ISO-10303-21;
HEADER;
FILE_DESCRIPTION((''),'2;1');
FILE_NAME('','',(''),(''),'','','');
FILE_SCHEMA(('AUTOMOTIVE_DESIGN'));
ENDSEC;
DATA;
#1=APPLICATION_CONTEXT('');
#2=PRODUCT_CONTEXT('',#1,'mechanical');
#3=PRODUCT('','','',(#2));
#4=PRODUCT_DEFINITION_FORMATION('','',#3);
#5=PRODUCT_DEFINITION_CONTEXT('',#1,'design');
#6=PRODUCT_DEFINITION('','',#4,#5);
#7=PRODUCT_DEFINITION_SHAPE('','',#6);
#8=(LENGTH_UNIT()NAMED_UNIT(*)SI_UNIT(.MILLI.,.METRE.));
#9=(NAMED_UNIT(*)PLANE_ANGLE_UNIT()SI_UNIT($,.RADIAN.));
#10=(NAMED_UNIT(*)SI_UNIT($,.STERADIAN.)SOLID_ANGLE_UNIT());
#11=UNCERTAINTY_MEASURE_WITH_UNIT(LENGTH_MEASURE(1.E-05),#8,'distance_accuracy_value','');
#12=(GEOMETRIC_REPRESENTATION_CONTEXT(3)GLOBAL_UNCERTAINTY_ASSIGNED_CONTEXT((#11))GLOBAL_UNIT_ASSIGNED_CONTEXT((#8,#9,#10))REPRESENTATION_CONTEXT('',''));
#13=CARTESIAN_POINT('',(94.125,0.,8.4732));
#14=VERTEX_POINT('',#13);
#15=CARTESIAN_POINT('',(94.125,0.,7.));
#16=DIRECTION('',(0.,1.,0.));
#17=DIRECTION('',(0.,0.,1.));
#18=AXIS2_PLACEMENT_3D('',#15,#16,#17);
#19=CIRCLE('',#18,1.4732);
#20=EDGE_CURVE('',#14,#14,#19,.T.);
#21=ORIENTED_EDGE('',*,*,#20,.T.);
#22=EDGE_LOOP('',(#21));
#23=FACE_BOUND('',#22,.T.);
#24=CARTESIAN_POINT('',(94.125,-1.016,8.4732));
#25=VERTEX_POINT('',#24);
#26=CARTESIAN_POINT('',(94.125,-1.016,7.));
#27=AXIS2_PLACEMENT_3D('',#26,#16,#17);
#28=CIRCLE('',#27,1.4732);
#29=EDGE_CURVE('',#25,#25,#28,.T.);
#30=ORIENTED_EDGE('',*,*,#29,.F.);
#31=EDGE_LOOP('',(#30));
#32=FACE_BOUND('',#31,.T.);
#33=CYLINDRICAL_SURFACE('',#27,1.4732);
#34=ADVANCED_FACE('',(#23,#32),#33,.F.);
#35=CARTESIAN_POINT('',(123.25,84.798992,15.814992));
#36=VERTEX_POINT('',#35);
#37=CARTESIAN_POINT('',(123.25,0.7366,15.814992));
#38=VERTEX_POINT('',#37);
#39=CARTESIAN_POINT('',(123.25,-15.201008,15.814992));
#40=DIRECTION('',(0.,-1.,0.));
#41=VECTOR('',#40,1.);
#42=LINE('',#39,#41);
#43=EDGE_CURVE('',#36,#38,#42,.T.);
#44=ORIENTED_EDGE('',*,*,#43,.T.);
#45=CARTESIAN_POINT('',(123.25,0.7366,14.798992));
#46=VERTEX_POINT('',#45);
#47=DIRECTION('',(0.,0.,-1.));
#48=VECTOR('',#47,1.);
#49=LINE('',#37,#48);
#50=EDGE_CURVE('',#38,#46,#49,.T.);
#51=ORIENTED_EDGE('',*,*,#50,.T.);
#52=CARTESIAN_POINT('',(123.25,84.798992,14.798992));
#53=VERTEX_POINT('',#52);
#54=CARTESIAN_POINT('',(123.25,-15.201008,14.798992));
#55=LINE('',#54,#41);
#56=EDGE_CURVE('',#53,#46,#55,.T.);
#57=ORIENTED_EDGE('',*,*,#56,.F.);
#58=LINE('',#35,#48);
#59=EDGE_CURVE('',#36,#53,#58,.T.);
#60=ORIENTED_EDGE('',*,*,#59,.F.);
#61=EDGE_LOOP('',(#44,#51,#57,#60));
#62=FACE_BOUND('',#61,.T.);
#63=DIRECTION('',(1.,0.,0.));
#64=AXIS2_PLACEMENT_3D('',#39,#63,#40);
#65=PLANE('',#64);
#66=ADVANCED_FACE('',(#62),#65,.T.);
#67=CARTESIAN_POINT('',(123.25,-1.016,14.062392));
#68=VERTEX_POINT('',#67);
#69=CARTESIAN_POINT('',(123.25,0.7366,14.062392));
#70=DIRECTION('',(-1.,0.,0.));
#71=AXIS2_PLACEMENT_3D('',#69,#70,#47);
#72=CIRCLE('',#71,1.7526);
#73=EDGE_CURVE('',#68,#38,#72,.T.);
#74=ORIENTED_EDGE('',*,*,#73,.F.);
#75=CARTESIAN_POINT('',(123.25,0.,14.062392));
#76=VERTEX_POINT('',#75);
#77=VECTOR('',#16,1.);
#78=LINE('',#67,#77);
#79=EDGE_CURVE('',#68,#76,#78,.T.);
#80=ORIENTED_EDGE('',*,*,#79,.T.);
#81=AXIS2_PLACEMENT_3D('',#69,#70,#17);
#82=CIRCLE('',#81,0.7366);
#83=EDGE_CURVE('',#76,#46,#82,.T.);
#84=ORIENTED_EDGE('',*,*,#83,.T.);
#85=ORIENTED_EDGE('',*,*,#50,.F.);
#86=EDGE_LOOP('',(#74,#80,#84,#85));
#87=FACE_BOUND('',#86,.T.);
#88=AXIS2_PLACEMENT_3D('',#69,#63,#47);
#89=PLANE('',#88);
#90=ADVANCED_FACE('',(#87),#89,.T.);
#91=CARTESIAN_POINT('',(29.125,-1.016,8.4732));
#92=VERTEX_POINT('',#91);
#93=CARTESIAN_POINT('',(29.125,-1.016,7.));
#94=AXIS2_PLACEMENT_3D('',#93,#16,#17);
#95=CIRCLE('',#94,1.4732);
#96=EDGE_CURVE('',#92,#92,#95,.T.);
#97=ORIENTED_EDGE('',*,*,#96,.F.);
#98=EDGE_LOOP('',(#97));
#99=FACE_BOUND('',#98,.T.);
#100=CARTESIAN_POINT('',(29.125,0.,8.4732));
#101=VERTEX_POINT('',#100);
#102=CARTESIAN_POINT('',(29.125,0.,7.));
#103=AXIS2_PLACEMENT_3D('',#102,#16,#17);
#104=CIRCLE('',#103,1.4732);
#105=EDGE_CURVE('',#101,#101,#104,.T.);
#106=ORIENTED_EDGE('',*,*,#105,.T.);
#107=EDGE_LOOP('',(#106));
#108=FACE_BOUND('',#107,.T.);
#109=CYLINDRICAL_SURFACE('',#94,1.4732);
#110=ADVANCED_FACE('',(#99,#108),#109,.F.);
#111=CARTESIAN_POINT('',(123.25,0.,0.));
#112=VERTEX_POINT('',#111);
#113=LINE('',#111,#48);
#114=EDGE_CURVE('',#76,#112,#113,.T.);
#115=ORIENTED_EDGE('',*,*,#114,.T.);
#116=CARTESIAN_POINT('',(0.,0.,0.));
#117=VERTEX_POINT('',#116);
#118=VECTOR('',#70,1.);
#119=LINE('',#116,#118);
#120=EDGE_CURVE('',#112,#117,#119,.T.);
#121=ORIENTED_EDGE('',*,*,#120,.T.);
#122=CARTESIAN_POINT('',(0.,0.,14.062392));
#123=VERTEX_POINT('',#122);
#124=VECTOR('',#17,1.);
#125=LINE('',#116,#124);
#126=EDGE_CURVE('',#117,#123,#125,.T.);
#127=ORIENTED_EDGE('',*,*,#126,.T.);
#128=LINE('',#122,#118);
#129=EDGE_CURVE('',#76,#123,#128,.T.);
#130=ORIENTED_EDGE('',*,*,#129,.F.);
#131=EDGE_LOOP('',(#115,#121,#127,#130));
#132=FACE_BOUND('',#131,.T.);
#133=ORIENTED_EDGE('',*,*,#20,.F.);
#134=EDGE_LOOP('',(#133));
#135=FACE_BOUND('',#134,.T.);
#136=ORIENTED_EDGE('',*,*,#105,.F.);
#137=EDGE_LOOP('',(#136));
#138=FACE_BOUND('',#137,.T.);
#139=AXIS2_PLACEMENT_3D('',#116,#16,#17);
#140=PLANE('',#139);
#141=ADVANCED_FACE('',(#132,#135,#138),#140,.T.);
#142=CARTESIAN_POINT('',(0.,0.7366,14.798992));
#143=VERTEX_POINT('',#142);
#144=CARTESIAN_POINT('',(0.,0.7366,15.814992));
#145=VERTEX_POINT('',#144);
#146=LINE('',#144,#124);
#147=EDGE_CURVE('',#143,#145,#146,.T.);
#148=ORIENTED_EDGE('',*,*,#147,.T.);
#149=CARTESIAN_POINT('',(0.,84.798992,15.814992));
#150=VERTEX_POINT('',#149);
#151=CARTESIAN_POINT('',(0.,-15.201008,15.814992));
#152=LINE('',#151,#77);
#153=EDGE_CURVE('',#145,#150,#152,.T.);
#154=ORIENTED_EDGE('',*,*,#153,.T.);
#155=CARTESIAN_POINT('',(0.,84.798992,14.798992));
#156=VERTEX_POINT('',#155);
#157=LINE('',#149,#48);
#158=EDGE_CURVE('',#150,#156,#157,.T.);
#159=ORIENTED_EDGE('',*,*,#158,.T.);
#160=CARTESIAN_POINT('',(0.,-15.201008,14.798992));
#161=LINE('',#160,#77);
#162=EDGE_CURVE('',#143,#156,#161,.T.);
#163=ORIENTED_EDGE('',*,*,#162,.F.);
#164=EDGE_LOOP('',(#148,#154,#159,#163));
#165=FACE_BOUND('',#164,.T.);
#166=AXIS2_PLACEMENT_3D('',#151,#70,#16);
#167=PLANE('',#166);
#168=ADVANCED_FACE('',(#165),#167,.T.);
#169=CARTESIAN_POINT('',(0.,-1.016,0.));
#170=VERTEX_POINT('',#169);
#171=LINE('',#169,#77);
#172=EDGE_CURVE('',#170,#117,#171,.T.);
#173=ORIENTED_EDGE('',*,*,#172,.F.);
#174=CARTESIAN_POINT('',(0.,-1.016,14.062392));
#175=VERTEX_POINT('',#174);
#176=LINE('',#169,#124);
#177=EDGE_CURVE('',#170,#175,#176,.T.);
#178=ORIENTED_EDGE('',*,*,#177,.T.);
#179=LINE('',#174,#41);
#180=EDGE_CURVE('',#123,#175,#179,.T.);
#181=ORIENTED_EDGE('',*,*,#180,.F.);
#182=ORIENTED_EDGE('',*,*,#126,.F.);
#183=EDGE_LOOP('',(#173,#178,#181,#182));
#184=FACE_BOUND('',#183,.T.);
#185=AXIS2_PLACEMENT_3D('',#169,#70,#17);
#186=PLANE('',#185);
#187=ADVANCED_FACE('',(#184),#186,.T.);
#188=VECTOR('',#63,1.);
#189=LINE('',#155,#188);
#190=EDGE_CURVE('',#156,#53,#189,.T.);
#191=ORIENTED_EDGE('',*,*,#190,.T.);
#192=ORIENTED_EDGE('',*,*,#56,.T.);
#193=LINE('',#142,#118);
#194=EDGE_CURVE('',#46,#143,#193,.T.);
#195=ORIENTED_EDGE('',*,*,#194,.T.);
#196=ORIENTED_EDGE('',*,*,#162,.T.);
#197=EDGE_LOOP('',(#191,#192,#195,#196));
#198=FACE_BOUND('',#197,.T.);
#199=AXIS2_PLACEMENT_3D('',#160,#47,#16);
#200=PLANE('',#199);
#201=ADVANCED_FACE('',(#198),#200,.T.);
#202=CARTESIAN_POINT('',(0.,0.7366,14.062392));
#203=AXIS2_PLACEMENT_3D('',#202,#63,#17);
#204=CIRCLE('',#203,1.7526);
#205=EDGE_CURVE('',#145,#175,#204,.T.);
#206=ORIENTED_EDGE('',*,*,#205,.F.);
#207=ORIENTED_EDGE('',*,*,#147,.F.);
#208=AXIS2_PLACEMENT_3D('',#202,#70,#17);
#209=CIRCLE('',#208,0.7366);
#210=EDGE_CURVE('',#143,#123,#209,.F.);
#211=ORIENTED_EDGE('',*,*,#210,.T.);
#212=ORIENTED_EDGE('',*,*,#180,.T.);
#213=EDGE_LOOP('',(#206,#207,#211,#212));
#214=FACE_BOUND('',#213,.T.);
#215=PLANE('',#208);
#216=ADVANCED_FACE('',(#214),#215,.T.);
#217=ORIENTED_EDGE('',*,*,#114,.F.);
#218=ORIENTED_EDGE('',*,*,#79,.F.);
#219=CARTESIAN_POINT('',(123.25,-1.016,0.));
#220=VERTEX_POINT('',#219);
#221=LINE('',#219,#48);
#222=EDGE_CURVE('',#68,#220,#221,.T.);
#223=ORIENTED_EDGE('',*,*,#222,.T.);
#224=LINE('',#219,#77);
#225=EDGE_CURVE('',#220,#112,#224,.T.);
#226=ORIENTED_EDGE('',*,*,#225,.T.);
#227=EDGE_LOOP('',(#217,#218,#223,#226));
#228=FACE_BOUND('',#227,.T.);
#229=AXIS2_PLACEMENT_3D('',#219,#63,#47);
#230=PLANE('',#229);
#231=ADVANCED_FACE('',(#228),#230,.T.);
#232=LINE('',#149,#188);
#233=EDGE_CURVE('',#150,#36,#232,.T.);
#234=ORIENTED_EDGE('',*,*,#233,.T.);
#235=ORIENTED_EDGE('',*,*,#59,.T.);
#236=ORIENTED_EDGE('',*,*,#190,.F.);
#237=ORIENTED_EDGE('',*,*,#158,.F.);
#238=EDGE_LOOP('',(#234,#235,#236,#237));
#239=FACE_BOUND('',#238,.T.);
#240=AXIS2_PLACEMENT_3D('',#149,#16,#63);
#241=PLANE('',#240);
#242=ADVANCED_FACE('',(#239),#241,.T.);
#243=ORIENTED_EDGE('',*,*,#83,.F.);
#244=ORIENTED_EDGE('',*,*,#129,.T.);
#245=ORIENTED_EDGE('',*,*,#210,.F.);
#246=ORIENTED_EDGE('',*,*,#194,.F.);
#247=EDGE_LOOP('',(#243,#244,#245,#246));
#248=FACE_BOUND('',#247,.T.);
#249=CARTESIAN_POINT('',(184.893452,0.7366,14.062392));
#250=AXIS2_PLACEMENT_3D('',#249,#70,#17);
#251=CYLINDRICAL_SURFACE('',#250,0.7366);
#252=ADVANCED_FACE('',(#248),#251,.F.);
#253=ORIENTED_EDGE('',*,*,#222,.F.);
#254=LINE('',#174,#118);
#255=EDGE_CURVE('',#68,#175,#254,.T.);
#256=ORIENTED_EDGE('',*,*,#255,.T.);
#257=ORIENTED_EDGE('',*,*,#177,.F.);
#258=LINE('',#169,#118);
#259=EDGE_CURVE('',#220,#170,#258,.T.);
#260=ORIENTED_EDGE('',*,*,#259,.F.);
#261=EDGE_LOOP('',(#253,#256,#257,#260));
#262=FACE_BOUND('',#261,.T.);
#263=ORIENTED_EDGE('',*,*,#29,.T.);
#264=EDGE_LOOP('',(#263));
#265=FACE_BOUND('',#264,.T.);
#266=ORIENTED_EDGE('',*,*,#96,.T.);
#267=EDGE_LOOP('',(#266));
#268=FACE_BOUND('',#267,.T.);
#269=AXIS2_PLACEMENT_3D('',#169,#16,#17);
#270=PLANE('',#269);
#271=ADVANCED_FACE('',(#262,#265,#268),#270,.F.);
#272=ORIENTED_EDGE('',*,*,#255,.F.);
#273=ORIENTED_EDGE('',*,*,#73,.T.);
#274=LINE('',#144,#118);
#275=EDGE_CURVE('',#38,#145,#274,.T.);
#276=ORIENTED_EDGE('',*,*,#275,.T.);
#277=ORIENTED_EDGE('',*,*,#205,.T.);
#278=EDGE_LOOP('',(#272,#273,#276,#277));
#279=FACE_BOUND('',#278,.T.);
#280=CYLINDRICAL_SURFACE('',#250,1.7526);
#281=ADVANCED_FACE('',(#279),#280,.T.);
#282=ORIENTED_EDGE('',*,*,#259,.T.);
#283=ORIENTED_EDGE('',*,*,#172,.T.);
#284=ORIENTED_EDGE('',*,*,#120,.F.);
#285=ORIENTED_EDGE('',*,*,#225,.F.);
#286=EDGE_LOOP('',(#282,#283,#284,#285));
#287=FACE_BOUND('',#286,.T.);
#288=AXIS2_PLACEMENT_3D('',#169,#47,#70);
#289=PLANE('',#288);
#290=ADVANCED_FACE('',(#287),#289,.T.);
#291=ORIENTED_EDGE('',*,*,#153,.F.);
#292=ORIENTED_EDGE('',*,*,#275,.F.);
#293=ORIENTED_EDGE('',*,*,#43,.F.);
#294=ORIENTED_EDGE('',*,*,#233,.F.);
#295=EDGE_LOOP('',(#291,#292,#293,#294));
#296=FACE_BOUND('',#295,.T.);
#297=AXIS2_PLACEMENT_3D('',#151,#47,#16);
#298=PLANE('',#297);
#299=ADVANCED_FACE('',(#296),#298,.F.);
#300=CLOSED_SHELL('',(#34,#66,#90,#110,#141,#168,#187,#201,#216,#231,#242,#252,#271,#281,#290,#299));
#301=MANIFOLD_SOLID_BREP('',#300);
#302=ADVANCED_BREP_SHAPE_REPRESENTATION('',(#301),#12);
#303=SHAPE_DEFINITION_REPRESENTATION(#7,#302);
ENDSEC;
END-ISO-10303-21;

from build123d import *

# Parameters (mm, degrees)
SKETCH1_W              = 123.25
SKETCH1_H              = 100
SKETCH1_R              = 1.4732
BASE_FLANGE1_DEPTH     = 1.016
SKETCHED_BEND2_DEPTH   = 123.25
SKETCHED_BEND2_2_DEPTH = 123.25


# Read off the part's stored shape, not the designer's step: Sketched Bend2
# Sheet-metal steps are written as plain solids
with BuildPart() as part:
    # Sketch1 → Base-Flange1 (new body)
    with BuildSketch(Plane(origin=(0, 0, 0), x_dir=(1, 0, 0), z_dir=(0, 1, 0))):
        with Locations((61.625, -50)):
            Rectangle(SKETCH1_W, SKETCH1_H)
        with Locations(Location((29.125, -7, 0), (0, 0, 270))):
            Circle(SKETCH1_R, mode=Mode.SUBTRACT)
        with Locations(Location((94.125, -7, 0), (0, 0, 270))):
            Circle(SKETCH1_R, mode=Mode.SUBTRACT)
    extrude(amount=-BASE_FLANGE1_DEPTH)

    # Sketched Bend2 outline → Sketched Bend2 (cut)
    with BuildSketch(Plane.YZ):
        with BuildLine():
            ThreePointArc((-1.016, 14.062391673), (-0.740317723, 15.005959794), (0, 15.652683218))
            Line((0, 15.652683218), (0, 100))
            Line((0, 100), (-1.016, 100))
            Line((-1.016, 100), (-1.016, 14.062391673))
        make_face()
    extrude(amount=SKETCHED_BEND2_DEPTH, mode=Mode.SUBTRACT)

    # Sketched Bend2 2 outline → Sketched Bend2 2 (add)
    with BuildSketch(Plane.YZ):
        with BuildLine():
            ThreePointArc((0, 14.062391673), (0.215745145, 14.583246528), (0.7366, 14.798991673))
            Line((0.7366, 14.798991673), (84.798991673, 14.798991673))
            Line((84.798991673, 14.798991673), (84.798991673, 15.814991673))
            Line((84.798991673, 15.814991673), (0.7366, 15.814991673))
            ThreePointArc((0.7366, 15.814991673), (0.35946488, 15.773933627), (0, 15.652683218))
            Line((0, 15.652683218), (0, 14.062391673))
        make_face()
    extrude(amount=SKETCHED_BEND2_2_DEPTH)


solid = part.part
